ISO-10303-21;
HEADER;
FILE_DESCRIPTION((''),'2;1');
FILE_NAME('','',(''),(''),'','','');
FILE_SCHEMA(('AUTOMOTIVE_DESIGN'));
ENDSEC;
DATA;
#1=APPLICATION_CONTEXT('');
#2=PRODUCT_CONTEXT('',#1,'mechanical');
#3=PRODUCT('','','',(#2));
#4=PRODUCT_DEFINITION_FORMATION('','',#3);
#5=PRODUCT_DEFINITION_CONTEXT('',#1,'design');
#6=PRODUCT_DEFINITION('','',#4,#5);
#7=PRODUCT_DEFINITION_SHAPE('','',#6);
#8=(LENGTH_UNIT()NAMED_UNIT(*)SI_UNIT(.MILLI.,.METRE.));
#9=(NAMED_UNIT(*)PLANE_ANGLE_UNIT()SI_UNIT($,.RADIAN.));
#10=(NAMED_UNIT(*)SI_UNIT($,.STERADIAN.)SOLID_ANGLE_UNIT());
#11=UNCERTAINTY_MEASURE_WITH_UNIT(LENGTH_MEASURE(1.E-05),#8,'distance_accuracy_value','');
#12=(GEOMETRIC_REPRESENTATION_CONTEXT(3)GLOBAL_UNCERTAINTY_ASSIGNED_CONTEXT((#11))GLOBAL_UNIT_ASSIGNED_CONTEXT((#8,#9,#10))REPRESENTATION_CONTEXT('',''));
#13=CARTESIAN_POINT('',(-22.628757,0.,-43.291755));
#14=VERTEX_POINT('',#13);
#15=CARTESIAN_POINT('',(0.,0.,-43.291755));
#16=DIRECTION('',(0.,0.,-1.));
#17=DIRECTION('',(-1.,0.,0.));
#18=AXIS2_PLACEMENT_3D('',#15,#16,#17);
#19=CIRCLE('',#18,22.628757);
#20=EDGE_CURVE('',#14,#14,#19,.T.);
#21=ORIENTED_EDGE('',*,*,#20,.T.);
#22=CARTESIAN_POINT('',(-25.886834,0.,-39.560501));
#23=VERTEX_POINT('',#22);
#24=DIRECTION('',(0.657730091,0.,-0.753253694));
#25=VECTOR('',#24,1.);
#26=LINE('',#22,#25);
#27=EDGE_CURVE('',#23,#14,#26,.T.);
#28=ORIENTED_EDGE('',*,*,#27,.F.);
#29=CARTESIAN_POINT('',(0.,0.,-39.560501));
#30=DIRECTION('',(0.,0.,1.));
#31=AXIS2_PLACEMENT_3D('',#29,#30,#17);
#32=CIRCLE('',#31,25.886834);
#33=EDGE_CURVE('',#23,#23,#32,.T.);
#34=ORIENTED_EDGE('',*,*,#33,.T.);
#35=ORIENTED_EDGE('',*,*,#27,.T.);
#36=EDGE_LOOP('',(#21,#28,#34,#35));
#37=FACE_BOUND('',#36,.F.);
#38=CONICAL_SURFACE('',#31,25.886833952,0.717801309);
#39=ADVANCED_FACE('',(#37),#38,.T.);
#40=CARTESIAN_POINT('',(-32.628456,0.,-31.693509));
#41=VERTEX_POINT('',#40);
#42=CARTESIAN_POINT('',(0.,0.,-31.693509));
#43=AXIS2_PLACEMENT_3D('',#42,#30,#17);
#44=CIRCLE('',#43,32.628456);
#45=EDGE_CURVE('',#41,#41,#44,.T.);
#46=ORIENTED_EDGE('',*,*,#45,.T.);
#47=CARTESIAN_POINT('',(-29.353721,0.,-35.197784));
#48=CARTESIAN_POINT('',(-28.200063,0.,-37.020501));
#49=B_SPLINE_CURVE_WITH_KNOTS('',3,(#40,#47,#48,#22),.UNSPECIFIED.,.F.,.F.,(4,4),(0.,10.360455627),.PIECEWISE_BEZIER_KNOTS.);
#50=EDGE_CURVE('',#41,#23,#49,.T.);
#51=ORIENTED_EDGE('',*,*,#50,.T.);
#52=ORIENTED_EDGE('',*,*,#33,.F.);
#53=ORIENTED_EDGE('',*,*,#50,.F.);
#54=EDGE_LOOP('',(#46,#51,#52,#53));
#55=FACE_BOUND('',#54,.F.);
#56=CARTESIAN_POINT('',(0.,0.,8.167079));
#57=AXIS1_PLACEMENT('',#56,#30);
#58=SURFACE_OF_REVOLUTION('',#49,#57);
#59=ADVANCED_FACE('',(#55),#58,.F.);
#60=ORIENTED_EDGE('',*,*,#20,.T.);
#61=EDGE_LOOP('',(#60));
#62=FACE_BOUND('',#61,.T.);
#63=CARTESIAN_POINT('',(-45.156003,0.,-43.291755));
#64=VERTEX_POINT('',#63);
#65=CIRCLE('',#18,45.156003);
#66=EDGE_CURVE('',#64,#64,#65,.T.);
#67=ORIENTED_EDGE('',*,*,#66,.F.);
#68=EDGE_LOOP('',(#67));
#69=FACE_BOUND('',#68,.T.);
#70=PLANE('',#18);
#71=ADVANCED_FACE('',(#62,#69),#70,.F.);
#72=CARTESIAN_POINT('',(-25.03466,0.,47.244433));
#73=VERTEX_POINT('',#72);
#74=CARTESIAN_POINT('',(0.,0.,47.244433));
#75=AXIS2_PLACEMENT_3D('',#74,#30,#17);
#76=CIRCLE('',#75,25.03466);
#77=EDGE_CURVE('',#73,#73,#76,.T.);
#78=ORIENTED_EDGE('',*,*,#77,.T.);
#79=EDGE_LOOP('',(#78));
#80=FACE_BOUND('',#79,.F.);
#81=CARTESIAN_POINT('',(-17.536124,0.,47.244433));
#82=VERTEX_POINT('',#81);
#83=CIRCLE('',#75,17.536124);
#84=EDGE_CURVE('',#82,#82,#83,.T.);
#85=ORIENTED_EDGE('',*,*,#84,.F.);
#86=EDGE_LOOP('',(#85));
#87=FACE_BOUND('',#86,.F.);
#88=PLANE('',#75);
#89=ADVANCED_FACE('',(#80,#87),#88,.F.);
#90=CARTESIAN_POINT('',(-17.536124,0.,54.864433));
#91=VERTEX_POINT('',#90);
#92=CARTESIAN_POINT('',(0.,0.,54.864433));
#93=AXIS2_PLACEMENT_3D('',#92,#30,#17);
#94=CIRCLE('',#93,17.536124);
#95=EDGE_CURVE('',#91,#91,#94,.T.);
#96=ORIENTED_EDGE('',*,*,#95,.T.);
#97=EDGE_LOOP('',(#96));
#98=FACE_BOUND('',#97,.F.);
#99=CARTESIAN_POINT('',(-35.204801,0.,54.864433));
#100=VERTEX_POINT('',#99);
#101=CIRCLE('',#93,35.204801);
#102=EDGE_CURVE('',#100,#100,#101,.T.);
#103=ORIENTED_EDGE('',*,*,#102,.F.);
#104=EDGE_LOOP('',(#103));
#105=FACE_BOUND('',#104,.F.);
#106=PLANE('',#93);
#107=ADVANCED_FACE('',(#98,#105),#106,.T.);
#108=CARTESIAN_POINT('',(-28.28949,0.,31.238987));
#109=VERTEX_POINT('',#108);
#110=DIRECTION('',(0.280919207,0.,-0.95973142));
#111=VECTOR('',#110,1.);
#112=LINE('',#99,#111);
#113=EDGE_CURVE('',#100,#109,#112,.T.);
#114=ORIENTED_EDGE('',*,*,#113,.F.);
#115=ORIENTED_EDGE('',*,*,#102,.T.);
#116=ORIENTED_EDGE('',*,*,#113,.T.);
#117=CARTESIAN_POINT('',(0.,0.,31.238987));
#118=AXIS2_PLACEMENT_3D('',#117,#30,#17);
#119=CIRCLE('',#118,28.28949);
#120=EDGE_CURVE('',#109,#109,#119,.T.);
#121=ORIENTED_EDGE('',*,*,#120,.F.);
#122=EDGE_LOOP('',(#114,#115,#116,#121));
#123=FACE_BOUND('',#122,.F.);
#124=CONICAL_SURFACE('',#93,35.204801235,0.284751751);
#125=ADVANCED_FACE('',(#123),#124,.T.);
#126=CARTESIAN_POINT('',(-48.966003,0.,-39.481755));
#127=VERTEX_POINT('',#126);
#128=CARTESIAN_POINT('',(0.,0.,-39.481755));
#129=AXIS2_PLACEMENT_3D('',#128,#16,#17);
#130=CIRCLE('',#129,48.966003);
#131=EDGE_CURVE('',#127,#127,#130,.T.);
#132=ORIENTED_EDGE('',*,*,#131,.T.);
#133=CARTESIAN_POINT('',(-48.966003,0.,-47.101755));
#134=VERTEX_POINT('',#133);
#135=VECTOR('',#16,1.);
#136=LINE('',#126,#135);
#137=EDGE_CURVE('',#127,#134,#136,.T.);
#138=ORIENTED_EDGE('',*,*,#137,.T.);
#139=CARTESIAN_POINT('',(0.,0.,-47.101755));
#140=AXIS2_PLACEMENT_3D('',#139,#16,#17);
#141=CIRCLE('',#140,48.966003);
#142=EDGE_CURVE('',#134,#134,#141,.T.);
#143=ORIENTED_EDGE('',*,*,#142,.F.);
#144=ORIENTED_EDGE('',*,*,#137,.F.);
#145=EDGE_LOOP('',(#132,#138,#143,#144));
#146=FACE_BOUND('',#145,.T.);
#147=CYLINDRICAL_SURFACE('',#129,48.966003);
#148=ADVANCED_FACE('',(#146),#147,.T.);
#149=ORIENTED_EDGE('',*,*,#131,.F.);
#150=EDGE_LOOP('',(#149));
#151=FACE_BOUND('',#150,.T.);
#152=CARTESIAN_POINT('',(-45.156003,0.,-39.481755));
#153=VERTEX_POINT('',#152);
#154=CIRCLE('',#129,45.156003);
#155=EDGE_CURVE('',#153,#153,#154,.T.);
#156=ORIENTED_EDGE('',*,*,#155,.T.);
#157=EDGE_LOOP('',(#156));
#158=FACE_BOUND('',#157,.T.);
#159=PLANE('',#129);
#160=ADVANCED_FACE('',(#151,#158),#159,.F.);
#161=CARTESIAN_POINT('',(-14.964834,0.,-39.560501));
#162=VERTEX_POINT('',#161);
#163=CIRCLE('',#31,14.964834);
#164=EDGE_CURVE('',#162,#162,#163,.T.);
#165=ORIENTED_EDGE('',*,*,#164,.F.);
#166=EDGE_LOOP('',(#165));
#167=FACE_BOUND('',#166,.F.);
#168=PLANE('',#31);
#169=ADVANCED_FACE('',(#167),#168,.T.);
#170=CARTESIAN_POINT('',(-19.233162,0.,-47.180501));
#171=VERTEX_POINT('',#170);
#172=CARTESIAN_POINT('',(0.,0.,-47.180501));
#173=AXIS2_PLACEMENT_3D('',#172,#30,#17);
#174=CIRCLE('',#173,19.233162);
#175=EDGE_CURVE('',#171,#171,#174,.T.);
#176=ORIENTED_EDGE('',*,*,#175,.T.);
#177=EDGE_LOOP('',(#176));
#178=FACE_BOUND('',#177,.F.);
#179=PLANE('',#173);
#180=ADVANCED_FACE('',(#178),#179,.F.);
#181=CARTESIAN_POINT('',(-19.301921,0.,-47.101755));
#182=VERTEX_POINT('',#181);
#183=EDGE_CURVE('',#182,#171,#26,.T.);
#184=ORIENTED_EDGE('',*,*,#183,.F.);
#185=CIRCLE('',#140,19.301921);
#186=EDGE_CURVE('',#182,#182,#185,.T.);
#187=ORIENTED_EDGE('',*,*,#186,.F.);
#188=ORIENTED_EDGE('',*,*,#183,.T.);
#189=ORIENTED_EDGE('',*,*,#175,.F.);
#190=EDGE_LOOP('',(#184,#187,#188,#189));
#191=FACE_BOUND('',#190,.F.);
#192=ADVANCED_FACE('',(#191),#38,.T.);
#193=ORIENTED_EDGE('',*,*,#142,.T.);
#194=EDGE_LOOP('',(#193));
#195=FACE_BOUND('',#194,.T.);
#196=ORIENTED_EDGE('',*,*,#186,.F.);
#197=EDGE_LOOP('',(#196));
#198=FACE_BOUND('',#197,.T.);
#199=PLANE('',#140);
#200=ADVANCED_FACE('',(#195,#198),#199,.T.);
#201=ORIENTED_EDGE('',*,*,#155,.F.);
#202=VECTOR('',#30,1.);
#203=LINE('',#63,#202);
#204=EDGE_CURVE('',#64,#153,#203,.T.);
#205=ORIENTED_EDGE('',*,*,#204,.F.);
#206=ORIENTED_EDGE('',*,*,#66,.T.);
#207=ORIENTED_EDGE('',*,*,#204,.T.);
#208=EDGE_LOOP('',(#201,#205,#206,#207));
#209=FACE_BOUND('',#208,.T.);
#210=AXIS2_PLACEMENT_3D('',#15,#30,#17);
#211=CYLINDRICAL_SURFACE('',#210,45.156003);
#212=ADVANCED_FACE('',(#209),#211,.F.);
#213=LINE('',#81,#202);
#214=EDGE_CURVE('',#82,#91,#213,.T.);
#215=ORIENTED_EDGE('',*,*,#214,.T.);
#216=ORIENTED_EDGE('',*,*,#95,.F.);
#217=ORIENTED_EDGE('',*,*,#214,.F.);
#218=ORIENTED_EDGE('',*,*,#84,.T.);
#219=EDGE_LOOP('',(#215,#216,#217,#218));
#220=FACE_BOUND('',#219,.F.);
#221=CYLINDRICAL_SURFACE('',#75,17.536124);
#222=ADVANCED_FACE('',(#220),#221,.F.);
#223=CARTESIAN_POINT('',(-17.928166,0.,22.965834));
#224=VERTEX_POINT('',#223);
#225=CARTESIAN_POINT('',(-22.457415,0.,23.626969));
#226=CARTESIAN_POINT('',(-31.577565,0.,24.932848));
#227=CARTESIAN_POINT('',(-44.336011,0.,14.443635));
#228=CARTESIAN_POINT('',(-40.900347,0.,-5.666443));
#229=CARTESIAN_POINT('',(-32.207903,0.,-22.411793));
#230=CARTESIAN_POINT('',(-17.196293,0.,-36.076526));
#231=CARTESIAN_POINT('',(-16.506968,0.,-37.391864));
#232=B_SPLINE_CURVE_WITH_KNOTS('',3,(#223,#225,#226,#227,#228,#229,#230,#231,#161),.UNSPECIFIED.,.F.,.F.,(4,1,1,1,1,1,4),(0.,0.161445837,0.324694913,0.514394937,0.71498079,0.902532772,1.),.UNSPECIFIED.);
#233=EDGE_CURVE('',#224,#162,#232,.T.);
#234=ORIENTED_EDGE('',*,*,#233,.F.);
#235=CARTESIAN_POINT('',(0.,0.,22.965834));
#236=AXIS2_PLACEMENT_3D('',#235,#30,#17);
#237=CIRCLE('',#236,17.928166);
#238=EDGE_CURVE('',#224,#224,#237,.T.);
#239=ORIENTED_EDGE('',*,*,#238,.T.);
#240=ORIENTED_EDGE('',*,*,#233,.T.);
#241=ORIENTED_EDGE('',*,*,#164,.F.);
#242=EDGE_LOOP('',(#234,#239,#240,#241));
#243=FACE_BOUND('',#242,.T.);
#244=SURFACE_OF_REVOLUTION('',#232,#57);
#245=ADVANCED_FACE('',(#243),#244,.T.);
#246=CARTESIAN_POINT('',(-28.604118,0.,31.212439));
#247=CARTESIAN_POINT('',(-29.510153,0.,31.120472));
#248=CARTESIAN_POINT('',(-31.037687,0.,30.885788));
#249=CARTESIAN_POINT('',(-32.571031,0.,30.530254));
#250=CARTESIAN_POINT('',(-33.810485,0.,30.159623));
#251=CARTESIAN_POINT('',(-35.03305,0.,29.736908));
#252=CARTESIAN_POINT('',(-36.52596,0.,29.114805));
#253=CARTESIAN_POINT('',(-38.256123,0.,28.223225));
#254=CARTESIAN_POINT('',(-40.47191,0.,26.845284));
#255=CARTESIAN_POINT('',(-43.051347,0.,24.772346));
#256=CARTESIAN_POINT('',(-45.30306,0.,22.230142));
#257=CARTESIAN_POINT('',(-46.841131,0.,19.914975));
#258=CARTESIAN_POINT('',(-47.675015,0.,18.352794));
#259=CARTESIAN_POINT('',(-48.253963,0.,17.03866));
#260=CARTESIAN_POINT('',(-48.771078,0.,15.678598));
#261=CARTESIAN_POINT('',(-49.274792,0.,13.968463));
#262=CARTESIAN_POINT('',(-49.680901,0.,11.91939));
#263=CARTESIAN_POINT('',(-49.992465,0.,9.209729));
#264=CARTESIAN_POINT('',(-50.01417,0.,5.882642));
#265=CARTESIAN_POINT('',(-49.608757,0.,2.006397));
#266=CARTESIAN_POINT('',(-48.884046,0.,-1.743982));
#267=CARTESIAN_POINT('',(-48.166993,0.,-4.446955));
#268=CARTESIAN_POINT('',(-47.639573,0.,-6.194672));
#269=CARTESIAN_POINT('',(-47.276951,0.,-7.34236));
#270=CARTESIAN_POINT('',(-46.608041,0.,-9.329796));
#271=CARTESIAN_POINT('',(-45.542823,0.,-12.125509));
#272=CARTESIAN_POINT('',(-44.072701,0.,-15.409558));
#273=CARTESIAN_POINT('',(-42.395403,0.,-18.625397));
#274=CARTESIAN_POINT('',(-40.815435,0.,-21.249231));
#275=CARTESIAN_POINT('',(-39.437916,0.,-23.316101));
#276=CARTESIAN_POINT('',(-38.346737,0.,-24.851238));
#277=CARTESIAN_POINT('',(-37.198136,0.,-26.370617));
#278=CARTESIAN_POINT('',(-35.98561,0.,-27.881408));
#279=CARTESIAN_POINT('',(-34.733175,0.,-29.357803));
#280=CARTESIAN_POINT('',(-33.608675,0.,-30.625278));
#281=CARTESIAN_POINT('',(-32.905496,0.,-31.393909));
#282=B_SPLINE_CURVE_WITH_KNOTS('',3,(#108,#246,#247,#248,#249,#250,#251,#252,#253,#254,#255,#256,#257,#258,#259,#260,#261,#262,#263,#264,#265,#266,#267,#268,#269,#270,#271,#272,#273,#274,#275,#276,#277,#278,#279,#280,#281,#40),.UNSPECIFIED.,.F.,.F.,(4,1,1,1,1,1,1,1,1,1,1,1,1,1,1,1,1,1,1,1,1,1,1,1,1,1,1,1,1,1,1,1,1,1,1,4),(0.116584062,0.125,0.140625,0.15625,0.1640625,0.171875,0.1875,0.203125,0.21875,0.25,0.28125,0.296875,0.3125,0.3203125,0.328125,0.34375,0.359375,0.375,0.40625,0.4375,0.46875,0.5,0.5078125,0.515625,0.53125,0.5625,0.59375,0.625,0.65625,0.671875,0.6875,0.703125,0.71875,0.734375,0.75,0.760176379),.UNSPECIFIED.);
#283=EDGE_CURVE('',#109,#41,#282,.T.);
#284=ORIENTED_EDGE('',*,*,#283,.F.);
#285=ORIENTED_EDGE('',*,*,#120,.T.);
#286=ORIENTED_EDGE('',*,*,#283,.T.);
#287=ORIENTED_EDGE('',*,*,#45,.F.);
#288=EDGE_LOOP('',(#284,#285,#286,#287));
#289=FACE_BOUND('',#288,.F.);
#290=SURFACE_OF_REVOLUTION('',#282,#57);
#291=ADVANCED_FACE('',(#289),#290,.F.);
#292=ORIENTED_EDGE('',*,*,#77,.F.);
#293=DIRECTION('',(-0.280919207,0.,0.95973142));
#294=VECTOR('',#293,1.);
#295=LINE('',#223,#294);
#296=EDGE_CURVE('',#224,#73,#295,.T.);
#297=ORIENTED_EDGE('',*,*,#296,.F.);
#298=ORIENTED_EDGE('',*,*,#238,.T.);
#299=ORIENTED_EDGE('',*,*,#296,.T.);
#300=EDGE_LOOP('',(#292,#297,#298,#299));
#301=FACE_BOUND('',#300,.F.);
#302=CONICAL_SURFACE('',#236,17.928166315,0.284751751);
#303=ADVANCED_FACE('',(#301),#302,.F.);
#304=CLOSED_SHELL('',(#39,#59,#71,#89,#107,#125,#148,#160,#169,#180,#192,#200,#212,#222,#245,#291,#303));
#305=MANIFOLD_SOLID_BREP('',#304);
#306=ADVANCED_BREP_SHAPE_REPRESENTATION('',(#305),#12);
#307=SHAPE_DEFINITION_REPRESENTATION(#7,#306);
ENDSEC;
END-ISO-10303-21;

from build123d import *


# Not quite as in the source:
# - ends of sketch curves that miss each other by under 0.0002 mm in the source are joined
# - the dataset's text gives a spline's control points without its knots; the knots are read off the source's solid


with BuildPart() as f2:
    # F0 (on Front) → F2 (revolve)
    with BuildSketch(Plane.XZ):
        with BuildLine():
            Line((-25.0346597179, 47.2444333136), (-17.5361242145, 47.2444333136))
            Line((-17.5361242145, 47.2444333136), (-17.5361242145, 54.8644333136))
            Line((-17.5361242145, 54.8644333136), (-35.2048012345, 54.8644333136))
            Line((-35.2048012345, 54.8644333136), (-28.289489922, 31.2389873851))
            add(Edge.make_bspline(
                [(-28.289489922, 31.2389873851), (-28.6041178305, 31.2124391794), (-29.5101526308, 31.1204722173), (-31.0376869866, 30.8857881394), (-32.5710309425, 30.5302540963), (-33.8104853839, 30.1596233424), (-35.03305031, 29.7369084446), (-36.5259601871, 29.1148051851), (-38.2561233277, 28.2232253901), (-40.4719095091, 26.8452842687), (-43.0513465812, 24.7723455812), (-45.3030601154, 22.2301415304), (-46.8411309798, 19.9149750587), (-47.6750154356, 18.3527943026), (-48.2539627145, 17.0386598282), (-48.7710780187, 15.6785979349), (-49.2747924885, 13.9684627304), (-49.6809009584, 11.9193903816), (-49.9924653672, 9.2097291865), (-50.014170035, 5.8826420041), (-49.6087574786, 2.0063972781), (-48.8840460528, -1.7439824698), (-48.1669934508, -4.4469548009), (-47.6395734534, -6.1946719725), (-47.2769511646, -7.3423598376), (-46.6080410139, -9.3297961071), (-45.5428226338, -12.1255090134), (-44.0727014161, -15.4095578979), (-42.3954025631, -18.6253966268), (-40.8154347549, -21.2492307316), (-39.4379157767, -23.3161012552), (-38.3467370235, -24.8512380934), (-37.1981355099, -26.3706166271), (-35.9856097961, -27.8814076992), (-34.733175354, -29.3578025206), (-33.6086751998, -30.6252778512), (-32.9054955981, -31.393909129), (-32.6284556557, -31.6935088743)],
                knots=[0.1165840616, 0.1165840616, 0.1165840616, 0.1165840616, 0.125, 0.140625, 0.15625, 0.1640625, 0.171875, 0.1875, 0.203125, 0.21875, 0.25, 0.28125, 0.296875, 0.3125, 0.3203125, 0.328125, 0.34375, 0.359375, 0.375, 0.40625, 0.4375, 0.46875, 0.5, 0.5078125, 0.515625, 0.53125, 0.5625, 0.59375, 0.625, 0.65625, 0.671875, 0.6875, 0.703125, 0.71875, 0.734375, 0.75, 0.7601763788, 0.7601763788, 0.7601763788, 0.7601763788], degree=3))
            add(Edge.make_bspline(
                [(-32.6284556557, -31.6935088743), (-29.3537211027, -35.1977835064), (-28.2000626357, -37.0205005319), (-25.8868339521, -39.5605005324)],
                knots=[0, 0, 0, 0, 10.3604556265, 10.3604556265, 10.3604556265, 10.3604556265], degree=3))
            Line((-25.8868339521, -39.5605005324), (-14.9648338556, -39.5605005324))
            add(Edge.make_bspline(
                [(-17.928166315, 22.9658335447), (-22.4574145842, 23.6269687071), (-31.577565005, 24.9328482979), (-44.3360106306, 14.4436354704), (-40.900346724, -5.6664430766), (-32.2079032901, -22.4117926186), (-17.1962934677, -36.0765255771), (-16.5069680661, -37.3918637633), (-14.9648338556, -39.5605005324)],
                knots=[0, 0, 0, 0, 0.1614458367, 0.3246949128, 0.5143949366, 0.71498079, 0.9025327716, 1, 1, 1, 1], degree=3))
            Line((-17.928166315, 22.9658335447), (-25.0346597179, 47.2444333136))
        make_face()
        Polygon((0, -39.5605005324), (-14.9648338556, -39.5605005324), (-8.756195195, -47.1805005324), (0, -47.1805005324), (0, -44.1324982991), align=None)
        Polygon((-8.756195195, -47.1805005324), (-14.9648338556, -39.5605005324), (-25.8868339521, -39.5605005324), (-19.2331615835, -47.1805005324), align=None)
    revolve(axis=Axis((0, 0, 8.1670787185), (0, 0, 1)))

    # F1 (on Front) → F3 (revolve)
    with BuildSketch(Plane.XZ):
        Polygon((-48.2781451661, -39.4817550206), (-48.9660029811, -39.4817550206), (-48.9660029811, -47.1017550206), (0, -47.1017550206), (0, -43.2917550206), (-45.1560029811, -43.2917550206), (-45.1560029811, -39.4817550206), align=None)
    revolve(axis=Axis((0, 0, -41.8464994157), (0, 0, -1)))


solid = f2.part
